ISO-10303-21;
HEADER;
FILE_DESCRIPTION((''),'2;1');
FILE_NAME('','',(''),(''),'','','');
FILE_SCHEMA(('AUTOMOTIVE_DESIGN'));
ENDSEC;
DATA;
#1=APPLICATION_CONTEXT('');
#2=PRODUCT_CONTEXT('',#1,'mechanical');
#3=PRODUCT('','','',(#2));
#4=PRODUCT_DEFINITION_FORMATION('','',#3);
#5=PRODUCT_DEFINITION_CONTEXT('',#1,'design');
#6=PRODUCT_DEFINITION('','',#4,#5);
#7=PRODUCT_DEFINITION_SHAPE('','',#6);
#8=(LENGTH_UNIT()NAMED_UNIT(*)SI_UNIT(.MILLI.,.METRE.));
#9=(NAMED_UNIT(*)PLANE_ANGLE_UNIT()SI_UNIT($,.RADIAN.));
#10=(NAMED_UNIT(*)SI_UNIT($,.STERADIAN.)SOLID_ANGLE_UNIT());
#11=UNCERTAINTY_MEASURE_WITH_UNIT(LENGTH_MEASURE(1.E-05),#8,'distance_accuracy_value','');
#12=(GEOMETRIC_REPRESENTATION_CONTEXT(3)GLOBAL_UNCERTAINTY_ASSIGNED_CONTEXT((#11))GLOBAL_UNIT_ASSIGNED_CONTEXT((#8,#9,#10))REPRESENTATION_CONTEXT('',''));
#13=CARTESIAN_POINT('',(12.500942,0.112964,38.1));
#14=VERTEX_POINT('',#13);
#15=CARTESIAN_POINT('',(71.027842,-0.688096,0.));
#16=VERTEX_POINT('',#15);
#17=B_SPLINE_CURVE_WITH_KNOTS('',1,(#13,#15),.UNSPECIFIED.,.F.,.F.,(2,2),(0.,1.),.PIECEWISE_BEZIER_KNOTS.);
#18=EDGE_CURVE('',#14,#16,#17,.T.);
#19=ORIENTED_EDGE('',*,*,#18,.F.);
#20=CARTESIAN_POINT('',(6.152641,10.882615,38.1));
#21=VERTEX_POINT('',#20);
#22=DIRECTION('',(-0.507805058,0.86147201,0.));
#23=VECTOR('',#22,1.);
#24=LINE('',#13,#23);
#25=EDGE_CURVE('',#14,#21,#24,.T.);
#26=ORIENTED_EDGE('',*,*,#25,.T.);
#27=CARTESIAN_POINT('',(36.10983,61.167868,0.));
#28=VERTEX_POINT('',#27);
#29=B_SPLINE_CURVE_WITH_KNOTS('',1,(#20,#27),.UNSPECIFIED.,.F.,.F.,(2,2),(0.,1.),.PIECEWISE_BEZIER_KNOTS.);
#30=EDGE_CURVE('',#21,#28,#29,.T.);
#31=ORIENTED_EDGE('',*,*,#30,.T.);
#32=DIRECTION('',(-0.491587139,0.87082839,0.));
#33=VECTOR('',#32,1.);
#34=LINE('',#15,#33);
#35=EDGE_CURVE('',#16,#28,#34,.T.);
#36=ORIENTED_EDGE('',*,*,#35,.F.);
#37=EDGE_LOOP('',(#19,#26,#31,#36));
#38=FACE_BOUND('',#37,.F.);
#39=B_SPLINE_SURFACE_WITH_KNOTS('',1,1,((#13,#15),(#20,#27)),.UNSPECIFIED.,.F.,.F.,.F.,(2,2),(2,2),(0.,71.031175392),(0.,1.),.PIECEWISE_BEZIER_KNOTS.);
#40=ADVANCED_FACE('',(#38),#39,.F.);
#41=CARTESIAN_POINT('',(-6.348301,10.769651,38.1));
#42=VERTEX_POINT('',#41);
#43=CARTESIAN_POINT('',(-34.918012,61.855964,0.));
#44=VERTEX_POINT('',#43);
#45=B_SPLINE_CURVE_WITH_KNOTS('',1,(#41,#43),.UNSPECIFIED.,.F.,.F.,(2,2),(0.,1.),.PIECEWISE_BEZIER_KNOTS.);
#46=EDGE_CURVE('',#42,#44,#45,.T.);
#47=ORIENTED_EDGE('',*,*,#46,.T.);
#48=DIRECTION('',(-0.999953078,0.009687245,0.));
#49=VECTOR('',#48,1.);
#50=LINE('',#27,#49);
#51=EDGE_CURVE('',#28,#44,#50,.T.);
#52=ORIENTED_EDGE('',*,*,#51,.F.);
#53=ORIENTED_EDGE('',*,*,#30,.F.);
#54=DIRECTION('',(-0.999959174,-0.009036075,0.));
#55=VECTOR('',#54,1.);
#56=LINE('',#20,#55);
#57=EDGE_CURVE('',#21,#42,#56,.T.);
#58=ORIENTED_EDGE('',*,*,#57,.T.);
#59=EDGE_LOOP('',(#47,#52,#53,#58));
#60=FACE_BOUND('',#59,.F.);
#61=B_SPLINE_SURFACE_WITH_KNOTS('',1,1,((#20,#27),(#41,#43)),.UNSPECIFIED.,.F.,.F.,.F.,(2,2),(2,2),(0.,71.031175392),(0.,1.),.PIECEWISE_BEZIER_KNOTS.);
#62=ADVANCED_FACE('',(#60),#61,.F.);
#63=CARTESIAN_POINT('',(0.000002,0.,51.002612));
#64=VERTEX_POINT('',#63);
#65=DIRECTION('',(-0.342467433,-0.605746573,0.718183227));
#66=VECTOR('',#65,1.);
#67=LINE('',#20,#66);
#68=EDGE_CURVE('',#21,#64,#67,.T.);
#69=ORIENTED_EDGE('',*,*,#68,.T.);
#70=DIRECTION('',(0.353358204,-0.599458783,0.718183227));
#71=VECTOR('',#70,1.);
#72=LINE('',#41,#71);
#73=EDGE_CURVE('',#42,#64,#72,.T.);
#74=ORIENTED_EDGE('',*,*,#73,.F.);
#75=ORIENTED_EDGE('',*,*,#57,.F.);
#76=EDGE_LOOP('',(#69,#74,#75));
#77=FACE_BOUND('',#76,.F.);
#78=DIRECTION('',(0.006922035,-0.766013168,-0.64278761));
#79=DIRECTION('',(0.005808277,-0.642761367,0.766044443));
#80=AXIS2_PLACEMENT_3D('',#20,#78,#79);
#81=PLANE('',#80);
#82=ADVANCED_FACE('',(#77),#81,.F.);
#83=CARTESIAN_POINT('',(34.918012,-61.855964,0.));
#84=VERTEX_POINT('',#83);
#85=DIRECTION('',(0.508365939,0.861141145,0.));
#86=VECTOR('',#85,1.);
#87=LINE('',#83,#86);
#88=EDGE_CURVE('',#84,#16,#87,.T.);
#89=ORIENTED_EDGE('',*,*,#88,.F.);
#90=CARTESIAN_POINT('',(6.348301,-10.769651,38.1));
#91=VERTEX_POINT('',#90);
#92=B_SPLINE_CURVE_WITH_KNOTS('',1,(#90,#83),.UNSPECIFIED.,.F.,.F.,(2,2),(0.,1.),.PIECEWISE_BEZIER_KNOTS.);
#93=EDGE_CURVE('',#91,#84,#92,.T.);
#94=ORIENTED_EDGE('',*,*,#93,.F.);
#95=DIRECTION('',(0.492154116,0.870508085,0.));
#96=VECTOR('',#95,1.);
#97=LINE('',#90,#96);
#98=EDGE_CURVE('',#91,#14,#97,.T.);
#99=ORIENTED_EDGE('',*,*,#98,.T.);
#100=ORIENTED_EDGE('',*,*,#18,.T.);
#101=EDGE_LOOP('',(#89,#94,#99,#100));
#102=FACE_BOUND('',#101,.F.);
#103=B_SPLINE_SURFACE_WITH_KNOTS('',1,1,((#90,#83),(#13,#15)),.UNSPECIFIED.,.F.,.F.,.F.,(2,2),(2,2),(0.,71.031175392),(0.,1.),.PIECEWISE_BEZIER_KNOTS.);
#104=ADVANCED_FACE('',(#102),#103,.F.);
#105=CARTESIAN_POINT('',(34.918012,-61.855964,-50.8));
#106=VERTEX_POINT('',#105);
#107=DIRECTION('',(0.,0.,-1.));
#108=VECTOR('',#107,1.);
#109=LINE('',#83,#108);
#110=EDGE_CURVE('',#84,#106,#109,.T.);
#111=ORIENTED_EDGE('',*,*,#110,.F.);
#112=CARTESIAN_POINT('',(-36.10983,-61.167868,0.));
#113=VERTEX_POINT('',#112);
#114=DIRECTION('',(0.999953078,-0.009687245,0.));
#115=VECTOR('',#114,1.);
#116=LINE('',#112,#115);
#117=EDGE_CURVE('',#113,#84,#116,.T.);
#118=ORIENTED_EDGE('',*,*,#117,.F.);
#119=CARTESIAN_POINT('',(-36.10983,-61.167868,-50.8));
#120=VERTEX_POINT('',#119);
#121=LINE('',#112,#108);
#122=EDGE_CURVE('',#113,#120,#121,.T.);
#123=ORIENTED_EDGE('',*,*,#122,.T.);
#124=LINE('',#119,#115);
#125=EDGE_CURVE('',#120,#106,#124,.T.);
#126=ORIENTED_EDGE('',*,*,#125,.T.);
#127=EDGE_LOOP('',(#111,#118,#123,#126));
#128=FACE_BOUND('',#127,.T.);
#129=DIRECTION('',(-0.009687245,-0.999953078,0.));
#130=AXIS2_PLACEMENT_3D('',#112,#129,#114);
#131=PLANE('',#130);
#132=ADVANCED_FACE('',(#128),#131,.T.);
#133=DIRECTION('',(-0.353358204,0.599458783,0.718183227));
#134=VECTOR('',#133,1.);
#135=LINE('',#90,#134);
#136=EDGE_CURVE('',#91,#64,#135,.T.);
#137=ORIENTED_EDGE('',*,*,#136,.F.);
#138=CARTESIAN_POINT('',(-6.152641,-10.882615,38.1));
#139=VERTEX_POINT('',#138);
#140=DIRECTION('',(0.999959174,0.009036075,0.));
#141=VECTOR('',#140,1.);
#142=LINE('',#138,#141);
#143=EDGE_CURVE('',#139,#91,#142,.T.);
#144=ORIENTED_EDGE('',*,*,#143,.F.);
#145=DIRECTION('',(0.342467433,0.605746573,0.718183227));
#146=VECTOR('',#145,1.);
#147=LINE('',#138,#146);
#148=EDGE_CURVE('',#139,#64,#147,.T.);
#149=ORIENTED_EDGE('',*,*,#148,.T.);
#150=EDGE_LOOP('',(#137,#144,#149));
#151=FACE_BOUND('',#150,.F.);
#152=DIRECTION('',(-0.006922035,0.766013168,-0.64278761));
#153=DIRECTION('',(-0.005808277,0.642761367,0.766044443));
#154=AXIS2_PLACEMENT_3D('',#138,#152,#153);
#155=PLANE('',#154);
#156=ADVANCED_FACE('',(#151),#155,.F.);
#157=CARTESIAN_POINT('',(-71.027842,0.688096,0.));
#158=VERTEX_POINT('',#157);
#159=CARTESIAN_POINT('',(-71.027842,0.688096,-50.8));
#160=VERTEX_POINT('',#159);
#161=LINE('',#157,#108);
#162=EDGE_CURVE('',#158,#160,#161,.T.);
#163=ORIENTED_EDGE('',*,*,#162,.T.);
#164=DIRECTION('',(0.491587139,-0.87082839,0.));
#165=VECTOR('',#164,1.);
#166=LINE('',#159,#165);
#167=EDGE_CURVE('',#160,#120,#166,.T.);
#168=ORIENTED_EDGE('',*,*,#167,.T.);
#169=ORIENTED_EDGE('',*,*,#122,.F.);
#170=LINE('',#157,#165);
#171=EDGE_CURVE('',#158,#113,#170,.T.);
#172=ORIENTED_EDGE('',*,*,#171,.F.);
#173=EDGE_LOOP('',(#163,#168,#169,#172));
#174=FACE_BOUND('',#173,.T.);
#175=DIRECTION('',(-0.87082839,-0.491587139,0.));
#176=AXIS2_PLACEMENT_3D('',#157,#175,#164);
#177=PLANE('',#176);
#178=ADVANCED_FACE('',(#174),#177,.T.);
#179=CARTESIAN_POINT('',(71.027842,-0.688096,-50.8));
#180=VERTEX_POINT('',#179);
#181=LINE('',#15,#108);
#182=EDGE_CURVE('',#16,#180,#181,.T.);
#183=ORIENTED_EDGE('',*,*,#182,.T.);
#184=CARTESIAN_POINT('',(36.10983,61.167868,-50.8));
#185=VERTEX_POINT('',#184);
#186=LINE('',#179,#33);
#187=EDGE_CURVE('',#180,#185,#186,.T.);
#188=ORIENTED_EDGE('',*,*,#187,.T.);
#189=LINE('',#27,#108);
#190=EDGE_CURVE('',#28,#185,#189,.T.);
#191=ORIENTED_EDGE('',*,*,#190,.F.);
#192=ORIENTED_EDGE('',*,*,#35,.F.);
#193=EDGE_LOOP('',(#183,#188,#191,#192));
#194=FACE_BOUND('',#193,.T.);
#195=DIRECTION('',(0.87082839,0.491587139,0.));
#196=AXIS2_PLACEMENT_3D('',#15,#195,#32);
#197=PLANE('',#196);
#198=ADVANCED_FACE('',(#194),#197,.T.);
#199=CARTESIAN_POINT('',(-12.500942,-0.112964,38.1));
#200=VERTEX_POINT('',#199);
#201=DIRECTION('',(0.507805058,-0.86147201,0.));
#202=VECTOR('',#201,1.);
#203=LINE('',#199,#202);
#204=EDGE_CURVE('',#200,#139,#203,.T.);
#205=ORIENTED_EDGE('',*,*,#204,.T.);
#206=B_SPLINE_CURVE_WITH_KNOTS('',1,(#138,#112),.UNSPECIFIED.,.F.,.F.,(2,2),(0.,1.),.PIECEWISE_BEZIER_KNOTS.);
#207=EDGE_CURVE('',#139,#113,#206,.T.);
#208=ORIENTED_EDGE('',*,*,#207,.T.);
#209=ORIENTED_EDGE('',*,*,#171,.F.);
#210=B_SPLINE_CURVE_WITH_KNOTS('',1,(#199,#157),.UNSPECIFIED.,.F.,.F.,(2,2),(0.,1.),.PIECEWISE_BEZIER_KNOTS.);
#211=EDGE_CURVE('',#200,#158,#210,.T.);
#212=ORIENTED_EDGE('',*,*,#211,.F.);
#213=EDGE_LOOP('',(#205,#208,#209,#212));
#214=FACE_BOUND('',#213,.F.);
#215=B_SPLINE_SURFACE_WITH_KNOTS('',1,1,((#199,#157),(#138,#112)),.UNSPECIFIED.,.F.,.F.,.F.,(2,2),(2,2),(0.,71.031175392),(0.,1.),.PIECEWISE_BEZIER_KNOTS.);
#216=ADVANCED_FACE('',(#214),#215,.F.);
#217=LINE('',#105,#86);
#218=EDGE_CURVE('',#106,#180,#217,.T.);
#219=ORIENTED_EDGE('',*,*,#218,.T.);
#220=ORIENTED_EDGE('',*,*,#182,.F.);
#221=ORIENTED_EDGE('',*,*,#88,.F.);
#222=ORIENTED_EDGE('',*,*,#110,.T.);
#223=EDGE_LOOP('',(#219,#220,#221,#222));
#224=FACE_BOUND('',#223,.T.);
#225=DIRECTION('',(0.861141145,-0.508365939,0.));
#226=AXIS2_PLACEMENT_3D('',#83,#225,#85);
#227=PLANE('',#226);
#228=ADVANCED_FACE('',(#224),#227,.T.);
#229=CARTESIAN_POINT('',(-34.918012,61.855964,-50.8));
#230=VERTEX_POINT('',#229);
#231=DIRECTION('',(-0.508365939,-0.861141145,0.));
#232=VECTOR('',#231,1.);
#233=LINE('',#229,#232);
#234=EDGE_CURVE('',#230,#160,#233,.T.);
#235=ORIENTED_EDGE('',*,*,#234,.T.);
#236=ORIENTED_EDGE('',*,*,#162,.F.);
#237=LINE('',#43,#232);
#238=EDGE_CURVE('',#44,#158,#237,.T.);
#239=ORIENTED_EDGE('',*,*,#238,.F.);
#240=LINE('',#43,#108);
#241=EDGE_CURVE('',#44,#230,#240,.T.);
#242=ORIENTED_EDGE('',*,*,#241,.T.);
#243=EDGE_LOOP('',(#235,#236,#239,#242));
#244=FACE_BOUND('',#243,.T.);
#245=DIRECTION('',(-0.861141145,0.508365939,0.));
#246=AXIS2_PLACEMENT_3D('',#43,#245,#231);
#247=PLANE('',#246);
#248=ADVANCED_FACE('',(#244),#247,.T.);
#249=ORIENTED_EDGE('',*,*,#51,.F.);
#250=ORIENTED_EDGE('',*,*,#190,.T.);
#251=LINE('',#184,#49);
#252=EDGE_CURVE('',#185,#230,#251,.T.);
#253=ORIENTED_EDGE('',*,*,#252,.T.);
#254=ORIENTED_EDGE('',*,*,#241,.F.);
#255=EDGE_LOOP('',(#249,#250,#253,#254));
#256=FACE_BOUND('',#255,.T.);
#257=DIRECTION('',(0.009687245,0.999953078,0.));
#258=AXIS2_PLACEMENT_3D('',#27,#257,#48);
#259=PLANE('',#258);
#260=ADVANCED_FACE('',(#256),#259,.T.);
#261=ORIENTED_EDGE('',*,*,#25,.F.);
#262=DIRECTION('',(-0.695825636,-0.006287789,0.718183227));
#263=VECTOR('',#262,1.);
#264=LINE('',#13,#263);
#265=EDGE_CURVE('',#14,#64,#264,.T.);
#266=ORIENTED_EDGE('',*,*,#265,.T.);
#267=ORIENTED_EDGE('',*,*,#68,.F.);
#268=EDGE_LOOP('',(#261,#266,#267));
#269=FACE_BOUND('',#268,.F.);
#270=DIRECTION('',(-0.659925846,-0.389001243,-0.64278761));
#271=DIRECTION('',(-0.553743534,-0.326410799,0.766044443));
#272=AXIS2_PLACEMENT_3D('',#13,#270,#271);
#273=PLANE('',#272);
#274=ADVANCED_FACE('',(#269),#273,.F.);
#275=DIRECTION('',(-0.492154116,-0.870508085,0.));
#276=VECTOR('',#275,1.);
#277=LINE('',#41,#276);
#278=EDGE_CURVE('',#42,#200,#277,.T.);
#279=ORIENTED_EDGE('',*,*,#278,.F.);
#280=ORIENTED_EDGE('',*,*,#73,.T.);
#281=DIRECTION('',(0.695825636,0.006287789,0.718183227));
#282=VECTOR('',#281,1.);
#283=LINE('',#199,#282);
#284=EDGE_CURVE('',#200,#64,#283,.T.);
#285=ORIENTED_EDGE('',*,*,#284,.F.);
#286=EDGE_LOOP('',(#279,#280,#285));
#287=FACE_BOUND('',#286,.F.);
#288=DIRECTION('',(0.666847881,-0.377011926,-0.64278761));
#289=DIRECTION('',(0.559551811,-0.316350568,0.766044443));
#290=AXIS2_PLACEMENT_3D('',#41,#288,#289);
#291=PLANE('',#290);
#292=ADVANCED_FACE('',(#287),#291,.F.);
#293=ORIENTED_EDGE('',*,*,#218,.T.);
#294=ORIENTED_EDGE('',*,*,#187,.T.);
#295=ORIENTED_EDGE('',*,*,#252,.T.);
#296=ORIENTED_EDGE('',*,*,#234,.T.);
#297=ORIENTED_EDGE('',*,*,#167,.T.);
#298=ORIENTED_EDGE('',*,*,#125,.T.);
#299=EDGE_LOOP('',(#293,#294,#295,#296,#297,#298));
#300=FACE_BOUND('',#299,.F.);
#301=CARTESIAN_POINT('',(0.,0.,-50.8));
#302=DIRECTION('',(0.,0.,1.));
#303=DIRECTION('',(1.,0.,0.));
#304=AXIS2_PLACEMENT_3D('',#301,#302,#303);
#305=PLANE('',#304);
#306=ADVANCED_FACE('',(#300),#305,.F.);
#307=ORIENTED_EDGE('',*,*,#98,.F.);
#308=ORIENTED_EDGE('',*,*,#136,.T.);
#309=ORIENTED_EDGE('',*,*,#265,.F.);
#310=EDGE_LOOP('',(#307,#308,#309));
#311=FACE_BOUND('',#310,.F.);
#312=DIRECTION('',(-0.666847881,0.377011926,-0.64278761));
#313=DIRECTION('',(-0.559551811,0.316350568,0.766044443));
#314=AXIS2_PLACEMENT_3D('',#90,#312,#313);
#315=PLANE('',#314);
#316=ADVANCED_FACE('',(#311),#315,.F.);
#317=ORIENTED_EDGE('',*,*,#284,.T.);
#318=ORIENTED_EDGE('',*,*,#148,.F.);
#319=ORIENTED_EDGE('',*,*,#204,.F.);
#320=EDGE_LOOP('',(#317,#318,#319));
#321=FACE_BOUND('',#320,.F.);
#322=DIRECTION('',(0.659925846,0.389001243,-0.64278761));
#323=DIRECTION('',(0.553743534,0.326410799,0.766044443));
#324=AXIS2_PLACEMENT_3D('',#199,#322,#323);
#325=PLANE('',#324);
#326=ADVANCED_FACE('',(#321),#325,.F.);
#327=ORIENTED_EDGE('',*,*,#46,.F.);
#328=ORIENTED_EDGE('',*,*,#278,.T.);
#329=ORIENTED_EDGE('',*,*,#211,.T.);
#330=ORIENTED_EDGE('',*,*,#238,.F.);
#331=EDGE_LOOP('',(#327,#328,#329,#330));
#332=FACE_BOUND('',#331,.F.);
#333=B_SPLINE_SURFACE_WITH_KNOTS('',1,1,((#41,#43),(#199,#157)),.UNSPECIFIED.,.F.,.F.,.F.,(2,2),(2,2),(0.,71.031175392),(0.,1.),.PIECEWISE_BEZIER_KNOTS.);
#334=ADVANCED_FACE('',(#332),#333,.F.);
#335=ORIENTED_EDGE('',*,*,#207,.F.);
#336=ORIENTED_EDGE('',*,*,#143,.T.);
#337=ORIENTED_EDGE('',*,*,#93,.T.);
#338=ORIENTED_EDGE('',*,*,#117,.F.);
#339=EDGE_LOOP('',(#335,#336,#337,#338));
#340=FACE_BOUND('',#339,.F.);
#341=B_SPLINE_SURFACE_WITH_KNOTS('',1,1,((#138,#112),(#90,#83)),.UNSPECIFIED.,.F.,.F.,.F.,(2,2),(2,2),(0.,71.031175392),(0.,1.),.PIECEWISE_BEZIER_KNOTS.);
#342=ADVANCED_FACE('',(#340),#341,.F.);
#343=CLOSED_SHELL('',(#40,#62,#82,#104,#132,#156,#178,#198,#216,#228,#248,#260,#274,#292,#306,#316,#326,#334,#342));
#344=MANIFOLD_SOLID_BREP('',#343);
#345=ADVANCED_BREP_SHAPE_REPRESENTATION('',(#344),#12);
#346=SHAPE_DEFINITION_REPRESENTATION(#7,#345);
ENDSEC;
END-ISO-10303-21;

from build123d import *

# Parameters (mm, degrees)
F2_DEPTH = 50.8
F5_DEPTH = 50.8
F5_TAPER = 40


with BuildPart() as f2:
    # F1 (on Top) → F2 (new body)
    with BuildSketch(Plane.XY):
        Polygon((71.0278424351, -0.688096386), (36.109830168, 61.1678677318), (-34.9180122671, 61.8559641178), (-71.0278424351, 0.688096386), (-36.109830168, -61.1678677318), (34.9180122671, -61.8559641178), align=None)
    extrude(amount=-F2_DEPTH)

    # F3 (on offset) → F4 section 0
    with BuildSketch(Plane.XY.offset(38.1)):
        Polygon((6.3483007252, -10.7696512714), (12.5009419535, 0.1129640632), (6.1526412283, 10.8826153346), (-6.3483007252, 10.7696512714), (-12.5009419535, -0.1129640632), (-6.1526412283, -10.8826153346), align=None)
    # F2_face (on face) → F4 section 1
    with BuildSketch(Plane.XY):
        Polygon((71.0278424351, -0.688096386), (36.109830168, 61.1678677318), (-34.9180122671, 61.8559641178), (-71.0278424351, 0.688096386), (-36.109830168, -61.1678677318), (34.9180122671, -61.8559641178), align=None)
    loft()

    # F4_face (on face) → F5 (join)
    with BuildSketch(Plane.XY.offset(38.1)):
        Polygon((-6.1526412283, -10.8826153346), (6.3483007252, -10.7696512714), (12.5009419535, 0.1129640632), (6.1526412283, 10.8826153346), (-6.3483007252, 10.7696512714), (-12.5009419535, -0.1129640632), align=None)
    extrude(amount=F5_DEPTH, taper=F5_TAPER)


solid = f2.part
